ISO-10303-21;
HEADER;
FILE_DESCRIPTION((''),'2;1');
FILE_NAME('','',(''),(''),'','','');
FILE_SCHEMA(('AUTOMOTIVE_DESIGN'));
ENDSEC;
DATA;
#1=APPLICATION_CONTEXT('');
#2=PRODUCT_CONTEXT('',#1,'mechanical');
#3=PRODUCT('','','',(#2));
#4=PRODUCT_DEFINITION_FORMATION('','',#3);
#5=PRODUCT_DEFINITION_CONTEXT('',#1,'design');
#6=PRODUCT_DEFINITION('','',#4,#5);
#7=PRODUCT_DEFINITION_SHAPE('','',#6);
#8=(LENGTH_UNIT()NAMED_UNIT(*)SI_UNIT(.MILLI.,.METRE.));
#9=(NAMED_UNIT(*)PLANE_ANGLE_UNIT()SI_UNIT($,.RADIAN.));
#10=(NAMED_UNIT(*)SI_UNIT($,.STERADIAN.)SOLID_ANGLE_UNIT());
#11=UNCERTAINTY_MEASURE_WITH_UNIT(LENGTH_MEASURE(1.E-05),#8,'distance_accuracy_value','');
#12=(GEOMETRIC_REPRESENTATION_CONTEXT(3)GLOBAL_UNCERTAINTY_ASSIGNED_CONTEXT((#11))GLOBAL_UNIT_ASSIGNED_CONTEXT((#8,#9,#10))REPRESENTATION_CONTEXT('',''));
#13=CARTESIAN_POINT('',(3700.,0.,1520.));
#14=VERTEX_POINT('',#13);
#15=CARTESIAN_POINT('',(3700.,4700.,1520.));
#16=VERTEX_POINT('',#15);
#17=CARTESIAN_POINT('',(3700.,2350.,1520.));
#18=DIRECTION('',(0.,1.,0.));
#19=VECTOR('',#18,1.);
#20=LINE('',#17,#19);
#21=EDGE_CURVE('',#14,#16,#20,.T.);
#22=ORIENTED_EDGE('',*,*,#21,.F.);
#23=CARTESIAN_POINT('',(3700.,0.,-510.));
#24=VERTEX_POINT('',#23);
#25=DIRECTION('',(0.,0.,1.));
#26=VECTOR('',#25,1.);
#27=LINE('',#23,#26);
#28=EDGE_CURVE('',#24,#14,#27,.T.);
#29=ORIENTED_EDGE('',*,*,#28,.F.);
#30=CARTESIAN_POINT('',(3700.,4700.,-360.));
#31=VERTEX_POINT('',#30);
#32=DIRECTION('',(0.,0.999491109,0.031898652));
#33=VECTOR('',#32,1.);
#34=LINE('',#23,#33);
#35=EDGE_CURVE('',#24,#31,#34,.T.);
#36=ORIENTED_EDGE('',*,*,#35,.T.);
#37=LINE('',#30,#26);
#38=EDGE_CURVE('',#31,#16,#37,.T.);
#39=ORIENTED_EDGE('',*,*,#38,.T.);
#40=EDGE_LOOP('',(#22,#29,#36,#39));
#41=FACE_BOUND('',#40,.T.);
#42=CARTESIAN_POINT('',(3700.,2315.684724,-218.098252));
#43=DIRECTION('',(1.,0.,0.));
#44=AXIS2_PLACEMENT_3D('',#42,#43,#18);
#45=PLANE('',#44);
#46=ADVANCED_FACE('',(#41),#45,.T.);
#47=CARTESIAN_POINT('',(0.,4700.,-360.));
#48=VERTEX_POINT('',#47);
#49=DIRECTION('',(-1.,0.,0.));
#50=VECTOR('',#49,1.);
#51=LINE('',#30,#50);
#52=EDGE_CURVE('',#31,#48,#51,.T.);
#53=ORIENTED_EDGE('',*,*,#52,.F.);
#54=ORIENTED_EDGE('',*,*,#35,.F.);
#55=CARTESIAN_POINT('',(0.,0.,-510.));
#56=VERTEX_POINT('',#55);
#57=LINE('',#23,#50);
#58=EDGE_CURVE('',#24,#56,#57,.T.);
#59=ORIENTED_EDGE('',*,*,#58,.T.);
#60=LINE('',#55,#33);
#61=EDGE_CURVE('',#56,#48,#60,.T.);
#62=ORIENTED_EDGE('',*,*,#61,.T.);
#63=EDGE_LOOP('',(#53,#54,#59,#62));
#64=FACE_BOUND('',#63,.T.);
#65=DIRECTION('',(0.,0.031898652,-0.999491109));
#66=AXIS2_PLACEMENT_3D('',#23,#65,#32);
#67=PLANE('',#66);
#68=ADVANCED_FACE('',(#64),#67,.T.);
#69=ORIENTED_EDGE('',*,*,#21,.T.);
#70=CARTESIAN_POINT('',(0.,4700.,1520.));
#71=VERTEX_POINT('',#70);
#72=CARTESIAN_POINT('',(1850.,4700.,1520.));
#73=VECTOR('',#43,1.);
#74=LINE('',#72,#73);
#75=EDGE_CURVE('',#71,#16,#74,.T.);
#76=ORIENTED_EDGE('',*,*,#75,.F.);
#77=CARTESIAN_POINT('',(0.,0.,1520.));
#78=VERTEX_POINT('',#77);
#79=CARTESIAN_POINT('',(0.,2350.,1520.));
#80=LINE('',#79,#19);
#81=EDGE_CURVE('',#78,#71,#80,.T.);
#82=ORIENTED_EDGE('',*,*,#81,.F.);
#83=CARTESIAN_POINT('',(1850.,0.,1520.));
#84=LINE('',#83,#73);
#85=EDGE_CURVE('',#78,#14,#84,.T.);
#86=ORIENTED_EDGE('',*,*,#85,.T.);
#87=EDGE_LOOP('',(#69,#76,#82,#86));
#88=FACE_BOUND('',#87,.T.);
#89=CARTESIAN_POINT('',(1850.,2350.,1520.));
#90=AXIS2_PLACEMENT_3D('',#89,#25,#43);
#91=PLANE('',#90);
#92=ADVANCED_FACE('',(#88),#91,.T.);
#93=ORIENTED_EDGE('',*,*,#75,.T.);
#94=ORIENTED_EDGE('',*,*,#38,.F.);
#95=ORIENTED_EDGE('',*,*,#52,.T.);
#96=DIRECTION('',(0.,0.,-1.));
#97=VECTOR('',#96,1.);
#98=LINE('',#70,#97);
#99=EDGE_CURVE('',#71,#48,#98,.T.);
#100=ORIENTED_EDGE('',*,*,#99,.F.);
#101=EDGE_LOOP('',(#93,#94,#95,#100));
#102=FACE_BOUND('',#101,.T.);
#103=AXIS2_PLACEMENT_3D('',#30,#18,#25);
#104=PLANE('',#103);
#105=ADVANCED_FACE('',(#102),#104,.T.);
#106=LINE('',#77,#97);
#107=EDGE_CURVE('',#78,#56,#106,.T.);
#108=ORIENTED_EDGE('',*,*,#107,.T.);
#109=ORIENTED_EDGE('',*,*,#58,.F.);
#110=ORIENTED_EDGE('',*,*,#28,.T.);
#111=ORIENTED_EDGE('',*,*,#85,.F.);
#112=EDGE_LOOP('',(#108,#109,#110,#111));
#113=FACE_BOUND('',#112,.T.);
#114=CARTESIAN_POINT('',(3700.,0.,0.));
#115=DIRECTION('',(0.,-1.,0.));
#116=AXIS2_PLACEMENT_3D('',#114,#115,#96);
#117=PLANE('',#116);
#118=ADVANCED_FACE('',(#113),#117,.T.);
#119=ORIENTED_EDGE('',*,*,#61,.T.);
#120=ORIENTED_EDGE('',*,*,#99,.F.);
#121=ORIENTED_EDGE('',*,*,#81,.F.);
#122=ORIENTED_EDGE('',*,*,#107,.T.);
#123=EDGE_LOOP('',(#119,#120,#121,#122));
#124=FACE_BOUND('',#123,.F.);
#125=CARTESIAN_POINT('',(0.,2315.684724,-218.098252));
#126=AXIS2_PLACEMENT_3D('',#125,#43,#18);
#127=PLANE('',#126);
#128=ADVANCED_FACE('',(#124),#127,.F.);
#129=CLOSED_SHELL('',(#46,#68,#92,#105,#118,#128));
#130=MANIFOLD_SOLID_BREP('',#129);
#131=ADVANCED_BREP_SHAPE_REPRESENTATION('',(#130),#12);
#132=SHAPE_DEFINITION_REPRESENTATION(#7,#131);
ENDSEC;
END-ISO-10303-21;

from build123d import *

# Parameters (mm, degrees)
F0_W     = 3700
F0_H     = 4700
F1_DEPTH = 1520
F3_DEPTH = 3700


# Not quite as in the source:
# - the program builds the solid bodies; features that only make, move or delete a surface that nothing else refers to are left out


with BuildPart() as f1:
    # F0 (on Top) → F1 (new body)
    with BuildSketch(Plane.XY):
        with Locations((1850, 2350)):
            Rectangle(F0_W, F0_H)
    extrude(amount=F1_DEPTH)

    # F2 (on face) → F3 (join)
    with BuildSketch(Plane.YZ.offset(3700)):
        Polygon((4700, 0), (0, 0), (0, -510), (4700, -360), align=None)
    extrude(amount=-F3_DEPTH)


solid = f1.part
